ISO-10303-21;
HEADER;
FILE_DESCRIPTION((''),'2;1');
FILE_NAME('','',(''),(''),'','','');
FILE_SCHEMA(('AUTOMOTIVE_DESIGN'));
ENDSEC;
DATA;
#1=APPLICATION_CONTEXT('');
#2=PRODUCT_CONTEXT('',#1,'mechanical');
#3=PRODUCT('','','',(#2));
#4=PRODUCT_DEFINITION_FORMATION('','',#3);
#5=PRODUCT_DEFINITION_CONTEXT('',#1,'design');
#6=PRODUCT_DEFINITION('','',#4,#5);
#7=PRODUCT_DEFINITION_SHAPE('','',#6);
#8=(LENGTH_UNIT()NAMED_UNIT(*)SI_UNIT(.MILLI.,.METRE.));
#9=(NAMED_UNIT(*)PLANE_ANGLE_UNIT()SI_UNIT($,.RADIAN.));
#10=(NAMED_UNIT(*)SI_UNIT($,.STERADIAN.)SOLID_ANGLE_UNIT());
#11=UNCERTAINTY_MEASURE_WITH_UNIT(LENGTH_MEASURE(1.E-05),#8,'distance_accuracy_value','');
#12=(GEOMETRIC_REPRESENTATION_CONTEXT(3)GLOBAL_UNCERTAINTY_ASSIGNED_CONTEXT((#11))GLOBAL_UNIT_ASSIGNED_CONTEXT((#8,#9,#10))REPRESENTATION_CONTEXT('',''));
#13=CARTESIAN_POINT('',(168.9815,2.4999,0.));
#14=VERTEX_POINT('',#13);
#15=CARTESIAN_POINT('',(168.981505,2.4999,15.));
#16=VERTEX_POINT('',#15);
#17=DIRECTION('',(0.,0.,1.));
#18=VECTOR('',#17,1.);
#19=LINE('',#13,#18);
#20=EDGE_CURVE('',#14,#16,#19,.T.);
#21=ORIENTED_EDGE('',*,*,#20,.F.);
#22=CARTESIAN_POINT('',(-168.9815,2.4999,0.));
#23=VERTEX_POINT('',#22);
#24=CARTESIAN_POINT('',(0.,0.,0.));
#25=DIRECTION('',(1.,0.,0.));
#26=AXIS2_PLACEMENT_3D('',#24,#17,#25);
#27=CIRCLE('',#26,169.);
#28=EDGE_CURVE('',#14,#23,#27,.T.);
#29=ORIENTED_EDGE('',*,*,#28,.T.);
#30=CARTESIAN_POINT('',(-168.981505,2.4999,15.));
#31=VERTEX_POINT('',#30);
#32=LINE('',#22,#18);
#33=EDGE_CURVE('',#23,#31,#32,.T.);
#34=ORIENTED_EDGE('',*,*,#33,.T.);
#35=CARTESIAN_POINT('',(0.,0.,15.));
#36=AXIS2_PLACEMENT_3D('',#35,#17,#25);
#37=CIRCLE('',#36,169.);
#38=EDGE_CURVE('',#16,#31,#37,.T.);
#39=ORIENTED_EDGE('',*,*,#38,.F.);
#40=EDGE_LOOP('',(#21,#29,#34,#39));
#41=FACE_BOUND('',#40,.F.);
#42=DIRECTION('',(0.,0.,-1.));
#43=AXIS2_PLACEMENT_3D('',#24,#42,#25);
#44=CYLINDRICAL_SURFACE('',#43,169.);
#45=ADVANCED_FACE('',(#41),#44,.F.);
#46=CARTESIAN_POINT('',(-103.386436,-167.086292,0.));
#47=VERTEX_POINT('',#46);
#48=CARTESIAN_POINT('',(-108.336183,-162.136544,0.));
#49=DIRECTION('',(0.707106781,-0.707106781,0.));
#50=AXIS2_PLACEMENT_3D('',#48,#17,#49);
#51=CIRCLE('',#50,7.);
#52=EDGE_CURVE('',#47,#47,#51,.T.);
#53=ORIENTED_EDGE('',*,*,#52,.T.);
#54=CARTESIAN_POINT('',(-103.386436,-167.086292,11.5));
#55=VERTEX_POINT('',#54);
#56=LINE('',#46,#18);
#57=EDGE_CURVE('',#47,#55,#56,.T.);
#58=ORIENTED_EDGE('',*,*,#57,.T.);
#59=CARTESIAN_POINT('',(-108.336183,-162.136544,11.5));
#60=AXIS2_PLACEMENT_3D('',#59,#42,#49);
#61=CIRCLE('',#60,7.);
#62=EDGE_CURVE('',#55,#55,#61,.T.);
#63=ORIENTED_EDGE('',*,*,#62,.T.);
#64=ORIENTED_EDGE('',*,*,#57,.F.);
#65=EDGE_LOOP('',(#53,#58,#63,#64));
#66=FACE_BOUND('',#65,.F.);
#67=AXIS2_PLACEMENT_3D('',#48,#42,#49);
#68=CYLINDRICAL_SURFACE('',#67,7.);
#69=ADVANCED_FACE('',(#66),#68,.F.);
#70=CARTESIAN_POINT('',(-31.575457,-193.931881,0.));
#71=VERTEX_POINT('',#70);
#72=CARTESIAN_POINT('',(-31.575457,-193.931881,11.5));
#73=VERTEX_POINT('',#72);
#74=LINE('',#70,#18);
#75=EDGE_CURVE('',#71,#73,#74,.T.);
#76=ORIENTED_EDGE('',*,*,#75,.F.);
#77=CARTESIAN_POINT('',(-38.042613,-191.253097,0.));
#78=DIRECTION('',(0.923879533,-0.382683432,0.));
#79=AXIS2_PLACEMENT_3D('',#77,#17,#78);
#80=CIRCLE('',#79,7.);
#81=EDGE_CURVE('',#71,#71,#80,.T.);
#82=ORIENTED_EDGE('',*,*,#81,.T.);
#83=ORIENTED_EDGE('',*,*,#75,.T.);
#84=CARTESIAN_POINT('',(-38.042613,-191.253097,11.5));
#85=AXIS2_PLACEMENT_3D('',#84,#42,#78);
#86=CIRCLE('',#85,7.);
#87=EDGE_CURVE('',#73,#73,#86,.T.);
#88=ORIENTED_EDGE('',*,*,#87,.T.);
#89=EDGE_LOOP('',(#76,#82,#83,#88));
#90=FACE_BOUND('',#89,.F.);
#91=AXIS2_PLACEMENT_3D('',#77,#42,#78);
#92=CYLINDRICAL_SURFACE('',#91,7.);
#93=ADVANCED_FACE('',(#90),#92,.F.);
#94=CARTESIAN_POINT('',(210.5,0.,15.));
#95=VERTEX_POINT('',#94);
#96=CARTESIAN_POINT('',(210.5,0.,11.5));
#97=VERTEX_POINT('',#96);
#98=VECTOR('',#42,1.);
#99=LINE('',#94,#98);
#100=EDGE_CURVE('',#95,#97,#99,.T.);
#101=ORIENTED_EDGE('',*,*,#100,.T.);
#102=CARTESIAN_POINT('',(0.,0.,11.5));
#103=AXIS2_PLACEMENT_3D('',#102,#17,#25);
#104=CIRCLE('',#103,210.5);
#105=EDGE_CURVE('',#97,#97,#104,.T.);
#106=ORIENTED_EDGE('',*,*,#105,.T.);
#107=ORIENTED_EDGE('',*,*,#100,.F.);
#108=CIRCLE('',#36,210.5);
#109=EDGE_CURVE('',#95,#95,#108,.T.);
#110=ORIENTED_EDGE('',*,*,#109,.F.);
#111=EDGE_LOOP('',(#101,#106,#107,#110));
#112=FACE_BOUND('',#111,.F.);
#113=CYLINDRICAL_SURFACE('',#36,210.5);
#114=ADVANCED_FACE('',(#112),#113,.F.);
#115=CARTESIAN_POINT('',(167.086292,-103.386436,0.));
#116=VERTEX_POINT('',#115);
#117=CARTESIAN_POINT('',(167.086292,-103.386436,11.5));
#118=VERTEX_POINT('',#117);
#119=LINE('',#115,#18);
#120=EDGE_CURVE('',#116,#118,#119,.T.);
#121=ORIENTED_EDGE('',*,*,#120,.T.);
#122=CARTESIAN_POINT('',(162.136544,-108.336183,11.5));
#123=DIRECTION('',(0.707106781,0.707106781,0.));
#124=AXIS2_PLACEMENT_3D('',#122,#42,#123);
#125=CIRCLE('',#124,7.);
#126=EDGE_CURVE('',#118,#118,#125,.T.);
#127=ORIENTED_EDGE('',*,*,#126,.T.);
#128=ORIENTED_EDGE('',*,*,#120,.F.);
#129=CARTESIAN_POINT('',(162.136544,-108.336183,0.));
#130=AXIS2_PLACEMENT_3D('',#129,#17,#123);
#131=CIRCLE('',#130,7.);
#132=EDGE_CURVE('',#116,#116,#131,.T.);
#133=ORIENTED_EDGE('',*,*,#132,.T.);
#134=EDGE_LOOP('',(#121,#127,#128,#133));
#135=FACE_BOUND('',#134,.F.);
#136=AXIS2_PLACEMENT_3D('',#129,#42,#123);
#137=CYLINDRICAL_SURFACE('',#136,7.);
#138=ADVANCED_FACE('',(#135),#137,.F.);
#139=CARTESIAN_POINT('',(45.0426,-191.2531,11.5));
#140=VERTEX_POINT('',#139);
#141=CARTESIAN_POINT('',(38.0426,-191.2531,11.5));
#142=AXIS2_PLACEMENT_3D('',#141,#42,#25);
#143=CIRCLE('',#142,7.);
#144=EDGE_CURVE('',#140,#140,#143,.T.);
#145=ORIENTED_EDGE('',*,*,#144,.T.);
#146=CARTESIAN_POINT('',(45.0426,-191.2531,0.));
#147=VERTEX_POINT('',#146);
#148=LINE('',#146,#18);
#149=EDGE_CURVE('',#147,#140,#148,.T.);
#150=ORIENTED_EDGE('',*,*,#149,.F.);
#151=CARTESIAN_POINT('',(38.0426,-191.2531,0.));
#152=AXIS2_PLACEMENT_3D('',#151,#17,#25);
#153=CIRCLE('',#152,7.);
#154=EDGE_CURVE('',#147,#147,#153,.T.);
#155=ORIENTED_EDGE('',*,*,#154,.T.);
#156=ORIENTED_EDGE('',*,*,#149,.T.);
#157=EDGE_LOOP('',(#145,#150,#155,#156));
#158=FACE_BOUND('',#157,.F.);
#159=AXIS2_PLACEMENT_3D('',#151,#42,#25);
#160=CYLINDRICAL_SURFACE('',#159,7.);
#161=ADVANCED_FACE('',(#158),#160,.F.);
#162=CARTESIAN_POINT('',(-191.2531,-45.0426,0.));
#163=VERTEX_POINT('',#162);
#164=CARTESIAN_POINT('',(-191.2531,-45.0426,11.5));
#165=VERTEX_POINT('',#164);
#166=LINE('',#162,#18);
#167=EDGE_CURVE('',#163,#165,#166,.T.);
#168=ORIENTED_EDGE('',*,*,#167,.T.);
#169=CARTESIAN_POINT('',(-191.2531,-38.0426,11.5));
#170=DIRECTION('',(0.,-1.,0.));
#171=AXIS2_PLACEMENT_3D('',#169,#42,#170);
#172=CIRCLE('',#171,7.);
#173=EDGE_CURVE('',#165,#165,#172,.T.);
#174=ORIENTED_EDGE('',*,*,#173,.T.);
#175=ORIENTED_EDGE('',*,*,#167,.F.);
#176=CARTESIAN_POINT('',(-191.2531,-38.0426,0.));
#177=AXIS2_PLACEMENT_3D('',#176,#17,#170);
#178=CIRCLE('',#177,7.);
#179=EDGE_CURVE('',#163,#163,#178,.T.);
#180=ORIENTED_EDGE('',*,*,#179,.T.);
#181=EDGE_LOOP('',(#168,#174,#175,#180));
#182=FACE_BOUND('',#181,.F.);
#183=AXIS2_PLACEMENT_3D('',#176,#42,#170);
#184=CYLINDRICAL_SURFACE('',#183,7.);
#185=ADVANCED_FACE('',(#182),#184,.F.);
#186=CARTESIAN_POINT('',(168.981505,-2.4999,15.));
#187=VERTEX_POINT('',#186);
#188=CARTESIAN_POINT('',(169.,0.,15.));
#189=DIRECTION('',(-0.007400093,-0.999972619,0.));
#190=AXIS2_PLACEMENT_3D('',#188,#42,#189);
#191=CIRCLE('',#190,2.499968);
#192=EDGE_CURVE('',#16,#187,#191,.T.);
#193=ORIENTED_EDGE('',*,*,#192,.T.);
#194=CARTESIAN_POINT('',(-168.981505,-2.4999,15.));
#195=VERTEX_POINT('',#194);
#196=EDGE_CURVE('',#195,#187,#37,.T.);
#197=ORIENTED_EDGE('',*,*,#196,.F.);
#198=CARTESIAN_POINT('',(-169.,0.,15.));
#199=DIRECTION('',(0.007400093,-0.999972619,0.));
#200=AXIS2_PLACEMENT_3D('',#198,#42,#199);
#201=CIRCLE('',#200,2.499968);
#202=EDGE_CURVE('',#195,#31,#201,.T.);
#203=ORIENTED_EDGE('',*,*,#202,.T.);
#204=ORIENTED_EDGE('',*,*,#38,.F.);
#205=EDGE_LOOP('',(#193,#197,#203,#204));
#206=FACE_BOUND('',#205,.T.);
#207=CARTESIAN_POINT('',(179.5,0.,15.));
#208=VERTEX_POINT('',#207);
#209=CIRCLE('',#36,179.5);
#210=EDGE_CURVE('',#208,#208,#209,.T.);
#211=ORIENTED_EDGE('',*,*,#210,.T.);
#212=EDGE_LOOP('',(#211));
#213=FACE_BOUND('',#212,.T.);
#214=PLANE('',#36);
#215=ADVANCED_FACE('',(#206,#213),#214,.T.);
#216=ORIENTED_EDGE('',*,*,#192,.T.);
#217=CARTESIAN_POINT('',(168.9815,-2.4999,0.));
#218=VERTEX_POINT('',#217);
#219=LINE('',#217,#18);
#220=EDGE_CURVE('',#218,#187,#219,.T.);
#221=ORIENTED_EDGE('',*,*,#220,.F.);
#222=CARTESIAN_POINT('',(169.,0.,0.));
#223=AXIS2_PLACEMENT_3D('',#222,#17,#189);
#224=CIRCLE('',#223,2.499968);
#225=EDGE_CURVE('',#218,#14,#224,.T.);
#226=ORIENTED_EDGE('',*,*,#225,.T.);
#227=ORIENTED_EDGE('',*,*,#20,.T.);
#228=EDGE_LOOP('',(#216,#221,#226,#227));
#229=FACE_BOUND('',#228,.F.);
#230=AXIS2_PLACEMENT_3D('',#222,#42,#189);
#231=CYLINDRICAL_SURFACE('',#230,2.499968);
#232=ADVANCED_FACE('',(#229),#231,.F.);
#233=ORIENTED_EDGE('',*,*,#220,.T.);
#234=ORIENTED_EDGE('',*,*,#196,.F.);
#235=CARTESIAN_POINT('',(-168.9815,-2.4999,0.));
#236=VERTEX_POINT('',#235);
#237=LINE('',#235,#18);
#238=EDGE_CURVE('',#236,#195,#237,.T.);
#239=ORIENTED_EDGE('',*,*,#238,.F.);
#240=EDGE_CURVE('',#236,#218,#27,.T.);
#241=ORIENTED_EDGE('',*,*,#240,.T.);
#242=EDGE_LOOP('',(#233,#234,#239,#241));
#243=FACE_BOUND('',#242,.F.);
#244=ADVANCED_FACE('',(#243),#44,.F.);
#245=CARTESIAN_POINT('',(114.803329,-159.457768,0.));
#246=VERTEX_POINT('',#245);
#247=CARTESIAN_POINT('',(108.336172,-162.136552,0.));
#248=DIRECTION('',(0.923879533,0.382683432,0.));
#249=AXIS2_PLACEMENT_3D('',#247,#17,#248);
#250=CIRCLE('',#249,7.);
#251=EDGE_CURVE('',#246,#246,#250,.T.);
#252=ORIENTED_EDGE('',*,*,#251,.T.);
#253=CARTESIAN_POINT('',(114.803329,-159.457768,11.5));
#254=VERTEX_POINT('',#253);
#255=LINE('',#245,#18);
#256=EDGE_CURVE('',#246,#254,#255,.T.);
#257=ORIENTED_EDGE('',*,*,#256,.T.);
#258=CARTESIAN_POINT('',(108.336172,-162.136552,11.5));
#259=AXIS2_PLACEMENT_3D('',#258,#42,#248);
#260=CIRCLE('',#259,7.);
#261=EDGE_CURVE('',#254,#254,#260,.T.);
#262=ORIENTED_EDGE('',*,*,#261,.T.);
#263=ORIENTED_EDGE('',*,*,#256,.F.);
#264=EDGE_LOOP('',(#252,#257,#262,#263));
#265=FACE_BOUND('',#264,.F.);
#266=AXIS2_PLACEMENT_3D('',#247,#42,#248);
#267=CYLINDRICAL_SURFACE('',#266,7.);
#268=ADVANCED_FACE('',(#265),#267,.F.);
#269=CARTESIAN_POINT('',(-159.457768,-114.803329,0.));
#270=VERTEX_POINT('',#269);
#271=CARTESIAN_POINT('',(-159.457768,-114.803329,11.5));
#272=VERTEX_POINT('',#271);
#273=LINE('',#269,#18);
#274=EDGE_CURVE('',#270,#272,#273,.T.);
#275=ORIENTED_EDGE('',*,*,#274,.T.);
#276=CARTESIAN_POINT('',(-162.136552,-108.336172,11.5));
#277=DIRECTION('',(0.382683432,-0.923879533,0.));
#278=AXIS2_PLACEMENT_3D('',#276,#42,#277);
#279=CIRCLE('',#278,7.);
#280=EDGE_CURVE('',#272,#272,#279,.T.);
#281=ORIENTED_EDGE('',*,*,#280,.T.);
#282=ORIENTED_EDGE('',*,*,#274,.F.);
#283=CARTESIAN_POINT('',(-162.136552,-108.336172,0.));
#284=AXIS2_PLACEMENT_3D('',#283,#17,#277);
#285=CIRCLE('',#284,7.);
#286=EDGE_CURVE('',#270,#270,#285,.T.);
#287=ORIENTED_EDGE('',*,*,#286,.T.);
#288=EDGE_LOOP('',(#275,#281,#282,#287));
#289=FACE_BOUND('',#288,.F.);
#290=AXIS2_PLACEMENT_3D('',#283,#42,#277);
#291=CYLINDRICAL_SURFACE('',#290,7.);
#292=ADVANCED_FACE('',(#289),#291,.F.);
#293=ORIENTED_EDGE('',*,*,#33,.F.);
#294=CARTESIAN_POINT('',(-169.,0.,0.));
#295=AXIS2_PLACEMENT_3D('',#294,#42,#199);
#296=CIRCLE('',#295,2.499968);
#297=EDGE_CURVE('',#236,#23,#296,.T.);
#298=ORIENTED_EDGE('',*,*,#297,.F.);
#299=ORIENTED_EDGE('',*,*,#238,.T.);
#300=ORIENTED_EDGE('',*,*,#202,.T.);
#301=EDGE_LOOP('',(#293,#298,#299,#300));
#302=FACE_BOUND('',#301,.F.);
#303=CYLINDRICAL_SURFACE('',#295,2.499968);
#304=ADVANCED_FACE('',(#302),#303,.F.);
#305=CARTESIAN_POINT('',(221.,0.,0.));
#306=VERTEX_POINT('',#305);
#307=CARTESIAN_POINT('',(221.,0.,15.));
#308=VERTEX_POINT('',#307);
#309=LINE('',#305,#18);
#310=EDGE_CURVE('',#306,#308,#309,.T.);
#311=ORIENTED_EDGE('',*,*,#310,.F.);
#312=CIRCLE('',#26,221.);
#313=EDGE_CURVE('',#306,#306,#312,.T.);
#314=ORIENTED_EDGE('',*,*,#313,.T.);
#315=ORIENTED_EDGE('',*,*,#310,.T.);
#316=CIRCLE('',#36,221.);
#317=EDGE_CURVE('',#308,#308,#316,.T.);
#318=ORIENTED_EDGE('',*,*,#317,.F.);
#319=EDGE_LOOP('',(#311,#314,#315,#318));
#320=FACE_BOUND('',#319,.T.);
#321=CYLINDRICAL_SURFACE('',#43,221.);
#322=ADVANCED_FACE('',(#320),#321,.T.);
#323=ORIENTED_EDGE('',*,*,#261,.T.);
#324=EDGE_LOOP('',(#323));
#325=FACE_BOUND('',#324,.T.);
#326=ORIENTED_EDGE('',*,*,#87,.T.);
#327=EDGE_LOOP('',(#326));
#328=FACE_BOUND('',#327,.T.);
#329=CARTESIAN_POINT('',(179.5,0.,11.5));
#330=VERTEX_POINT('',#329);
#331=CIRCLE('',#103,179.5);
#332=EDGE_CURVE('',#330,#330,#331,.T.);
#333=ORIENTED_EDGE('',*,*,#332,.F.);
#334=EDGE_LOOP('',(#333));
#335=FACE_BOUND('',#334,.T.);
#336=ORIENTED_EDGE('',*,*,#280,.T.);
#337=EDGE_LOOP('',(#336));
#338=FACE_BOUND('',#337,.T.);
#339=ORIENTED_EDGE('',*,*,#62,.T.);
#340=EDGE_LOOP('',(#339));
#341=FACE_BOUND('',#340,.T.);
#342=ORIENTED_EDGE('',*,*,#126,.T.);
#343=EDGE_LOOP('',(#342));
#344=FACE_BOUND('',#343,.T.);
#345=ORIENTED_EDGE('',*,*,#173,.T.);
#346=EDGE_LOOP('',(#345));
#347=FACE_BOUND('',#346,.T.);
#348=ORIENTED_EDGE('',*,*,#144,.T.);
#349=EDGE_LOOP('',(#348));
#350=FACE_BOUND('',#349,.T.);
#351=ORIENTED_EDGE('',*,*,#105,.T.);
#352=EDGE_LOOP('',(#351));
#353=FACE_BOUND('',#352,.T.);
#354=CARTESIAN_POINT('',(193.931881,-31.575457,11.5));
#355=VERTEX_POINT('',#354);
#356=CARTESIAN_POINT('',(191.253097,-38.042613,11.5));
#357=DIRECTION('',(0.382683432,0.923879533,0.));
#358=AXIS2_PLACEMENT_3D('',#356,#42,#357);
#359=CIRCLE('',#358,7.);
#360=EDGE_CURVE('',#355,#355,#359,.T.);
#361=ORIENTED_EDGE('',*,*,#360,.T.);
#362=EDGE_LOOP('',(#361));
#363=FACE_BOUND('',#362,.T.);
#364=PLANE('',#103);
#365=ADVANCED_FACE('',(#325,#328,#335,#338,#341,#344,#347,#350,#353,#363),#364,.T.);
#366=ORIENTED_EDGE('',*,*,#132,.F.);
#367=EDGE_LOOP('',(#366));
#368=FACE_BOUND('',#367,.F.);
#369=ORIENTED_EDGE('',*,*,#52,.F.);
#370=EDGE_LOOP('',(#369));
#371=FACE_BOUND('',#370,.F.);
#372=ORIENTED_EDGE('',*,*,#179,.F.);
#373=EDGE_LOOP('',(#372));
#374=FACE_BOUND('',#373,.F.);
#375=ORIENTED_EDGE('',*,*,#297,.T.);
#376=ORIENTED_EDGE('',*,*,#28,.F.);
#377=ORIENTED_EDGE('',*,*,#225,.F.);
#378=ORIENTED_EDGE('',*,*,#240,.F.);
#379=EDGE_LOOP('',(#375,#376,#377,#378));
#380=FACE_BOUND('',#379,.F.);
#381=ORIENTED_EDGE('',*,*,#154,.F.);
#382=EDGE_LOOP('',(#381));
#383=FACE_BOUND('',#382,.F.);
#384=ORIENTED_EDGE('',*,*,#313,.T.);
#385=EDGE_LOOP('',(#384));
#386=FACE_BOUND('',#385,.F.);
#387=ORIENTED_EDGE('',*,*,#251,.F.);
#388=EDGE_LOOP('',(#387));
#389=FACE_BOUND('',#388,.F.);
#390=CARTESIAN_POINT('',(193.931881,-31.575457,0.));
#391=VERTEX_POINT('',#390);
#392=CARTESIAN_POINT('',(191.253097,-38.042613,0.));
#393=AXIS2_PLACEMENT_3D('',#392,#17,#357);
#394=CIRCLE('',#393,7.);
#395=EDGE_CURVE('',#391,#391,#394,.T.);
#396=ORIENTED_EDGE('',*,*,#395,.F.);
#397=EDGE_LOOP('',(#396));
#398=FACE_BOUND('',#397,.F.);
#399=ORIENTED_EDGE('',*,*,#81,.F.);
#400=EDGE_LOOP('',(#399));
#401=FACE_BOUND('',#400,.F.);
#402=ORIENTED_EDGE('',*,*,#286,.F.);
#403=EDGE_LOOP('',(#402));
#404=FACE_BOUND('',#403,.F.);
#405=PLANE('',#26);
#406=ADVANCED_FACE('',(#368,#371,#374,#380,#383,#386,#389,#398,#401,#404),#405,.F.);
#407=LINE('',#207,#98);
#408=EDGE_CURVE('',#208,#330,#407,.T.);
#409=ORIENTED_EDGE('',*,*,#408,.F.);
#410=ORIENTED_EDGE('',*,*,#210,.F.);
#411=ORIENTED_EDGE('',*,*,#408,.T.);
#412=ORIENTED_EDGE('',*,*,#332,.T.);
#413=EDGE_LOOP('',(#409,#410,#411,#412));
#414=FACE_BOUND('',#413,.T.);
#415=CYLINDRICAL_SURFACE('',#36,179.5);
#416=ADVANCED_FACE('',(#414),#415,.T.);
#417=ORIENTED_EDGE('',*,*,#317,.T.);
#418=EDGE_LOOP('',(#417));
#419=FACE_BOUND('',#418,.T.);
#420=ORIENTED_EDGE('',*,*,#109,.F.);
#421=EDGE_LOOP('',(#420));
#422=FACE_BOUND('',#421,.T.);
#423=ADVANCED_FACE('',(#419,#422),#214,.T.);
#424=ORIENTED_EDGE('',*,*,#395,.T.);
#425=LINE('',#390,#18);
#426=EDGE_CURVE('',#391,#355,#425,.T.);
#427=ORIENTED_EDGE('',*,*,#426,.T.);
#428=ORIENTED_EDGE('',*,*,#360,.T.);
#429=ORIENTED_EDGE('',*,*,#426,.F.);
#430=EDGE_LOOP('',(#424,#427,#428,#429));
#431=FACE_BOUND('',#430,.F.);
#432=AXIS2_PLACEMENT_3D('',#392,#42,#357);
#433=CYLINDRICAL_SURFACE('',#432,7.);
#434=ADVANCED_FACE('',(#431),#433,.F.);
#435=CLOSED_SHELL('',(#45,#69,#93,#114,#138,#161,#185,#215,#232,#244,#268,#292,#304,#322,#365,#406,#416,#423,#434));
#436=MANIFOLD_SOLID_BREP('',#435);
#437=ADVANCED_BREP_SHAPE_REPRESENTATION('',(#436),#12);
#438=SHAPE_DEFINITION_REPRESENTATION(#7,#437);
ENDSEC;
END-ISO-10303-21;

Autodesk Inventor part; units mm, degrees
ref_plane "YZ Plane" through (0, 0, 0) normal (1, 0, 0) x (0, 1, 0)
ref_plane "XZ Plane" through (0, 0, 0) normal (0, 1, 0) x (-1, 0, 0)
ref_plane "XY Plane" through (0, 0, 0) normal (0, 0, 1) x (1, 0, 0)
sketch "Sketch1" plane through (0, 0, 0) normal (0, 0, 1) x (1, 0, 0)
  circle A0 centre (0, 0) radius 169
  circle A1 centre (0, 0) radius 221
  circle A2 centre (0, 0) radius 195 construction
  line L0 (0, 169) -> (0, 221) construction
  point P0 (0, 195)
  dimension "d17" = 390
  dimension "d18" = 52
extrude "Extrusion1" add sketch "Sketch1" along normal blind 15
sketch "Sketch2" plane through (0, 0, 15) normal (0, 0, 1) x (1, 0, 0)
  circle A0 centre (0, 0) radius 221 construction
  circle A1 centre (0, 0) radius 169 construction
  line L0 (0, 210.5) -> (0, 179.5) construction
  line L1 (0, 169) -> (0, 0) construction
  circle A2 centre (0, 0) radius 179.5
  circle A3 centre (0, 0) radius 210.5
  circle A4 centre (0, 0) radius 195 construction
  point P0 (0, 195)
  dimension "d19" = 390
  dimension "d4" = 31
extrude "Extrusion2" cut sketch "Sketch2" against normal blind 3.5
sketch "Sketch3" plane through (0, 0, 0) normal (0, 0, 1) x (1, 0, 0)
  circle A0 centre (0, 0) radius 169 construction
  circle A1 centre (0, 0) radius 221 construction
  circle A2 centre (0, 0) radius 179.5 projected
  circle A3 centre (0, 0) radius 210.5 projected
  circle A4 centre (0, 0) radius 221 projected
  line L0 (0, 0) -> (0, -221) construction
  line L1 (0, 0) -> (43.115, -216.7535) construction
  line L2 (35.0187, -176.051) -> (41.0665, -206.4553) construction
  circle A5 centre (38.0426, -191.2531) radius 7
  dimension "d20" = 11.25
  dimension "d21" = 14
extrude "Extrusion3" cut sketch "Sketch3" along normal through all contours A5
pattern_circular "Circular Pattern2" count 8 over 157.5 about axis through (0, 0, 0) along (0, 0, -1) of "Extrusion3" both ways yes
sketch "Sketch5" plane through (0, 0, 0) normal (0, 0, -1) x (-1, 0, 0)
  circle A0 centre (0, 0) radius 169 projected
  circle A1 centre (0, 0) radius 221 projected
  line L0 (0, 0) -> (169, 0) construction
  arc A2 (168.9815, -2.4999) -> (168.9815, 2.4999) centre (169, 0) ccw
  dimension "d36" = 5
extrude "Extrusion4" cut sketch "Sketch5" against normal through all contours A0 A2
mirror "Mirror1" about plane through (0, 0, 0) normal (1, 0, 0) of "Extrusion4"
equation "\"d17\" = Шпил_пласт_НОС_диам_центров"
equation "\"d19\" = Шпил_пласт_НОС_диам_центров"
equation "\"BendReliefDepth\" = 0.5 * Thickness"
equation "\"Шпил_пласт_НОС_диам_центров\" = 390"
equation "\"Thickness\" = 10"
properties part number "ДМС 020 кольцо прижимное нос"
